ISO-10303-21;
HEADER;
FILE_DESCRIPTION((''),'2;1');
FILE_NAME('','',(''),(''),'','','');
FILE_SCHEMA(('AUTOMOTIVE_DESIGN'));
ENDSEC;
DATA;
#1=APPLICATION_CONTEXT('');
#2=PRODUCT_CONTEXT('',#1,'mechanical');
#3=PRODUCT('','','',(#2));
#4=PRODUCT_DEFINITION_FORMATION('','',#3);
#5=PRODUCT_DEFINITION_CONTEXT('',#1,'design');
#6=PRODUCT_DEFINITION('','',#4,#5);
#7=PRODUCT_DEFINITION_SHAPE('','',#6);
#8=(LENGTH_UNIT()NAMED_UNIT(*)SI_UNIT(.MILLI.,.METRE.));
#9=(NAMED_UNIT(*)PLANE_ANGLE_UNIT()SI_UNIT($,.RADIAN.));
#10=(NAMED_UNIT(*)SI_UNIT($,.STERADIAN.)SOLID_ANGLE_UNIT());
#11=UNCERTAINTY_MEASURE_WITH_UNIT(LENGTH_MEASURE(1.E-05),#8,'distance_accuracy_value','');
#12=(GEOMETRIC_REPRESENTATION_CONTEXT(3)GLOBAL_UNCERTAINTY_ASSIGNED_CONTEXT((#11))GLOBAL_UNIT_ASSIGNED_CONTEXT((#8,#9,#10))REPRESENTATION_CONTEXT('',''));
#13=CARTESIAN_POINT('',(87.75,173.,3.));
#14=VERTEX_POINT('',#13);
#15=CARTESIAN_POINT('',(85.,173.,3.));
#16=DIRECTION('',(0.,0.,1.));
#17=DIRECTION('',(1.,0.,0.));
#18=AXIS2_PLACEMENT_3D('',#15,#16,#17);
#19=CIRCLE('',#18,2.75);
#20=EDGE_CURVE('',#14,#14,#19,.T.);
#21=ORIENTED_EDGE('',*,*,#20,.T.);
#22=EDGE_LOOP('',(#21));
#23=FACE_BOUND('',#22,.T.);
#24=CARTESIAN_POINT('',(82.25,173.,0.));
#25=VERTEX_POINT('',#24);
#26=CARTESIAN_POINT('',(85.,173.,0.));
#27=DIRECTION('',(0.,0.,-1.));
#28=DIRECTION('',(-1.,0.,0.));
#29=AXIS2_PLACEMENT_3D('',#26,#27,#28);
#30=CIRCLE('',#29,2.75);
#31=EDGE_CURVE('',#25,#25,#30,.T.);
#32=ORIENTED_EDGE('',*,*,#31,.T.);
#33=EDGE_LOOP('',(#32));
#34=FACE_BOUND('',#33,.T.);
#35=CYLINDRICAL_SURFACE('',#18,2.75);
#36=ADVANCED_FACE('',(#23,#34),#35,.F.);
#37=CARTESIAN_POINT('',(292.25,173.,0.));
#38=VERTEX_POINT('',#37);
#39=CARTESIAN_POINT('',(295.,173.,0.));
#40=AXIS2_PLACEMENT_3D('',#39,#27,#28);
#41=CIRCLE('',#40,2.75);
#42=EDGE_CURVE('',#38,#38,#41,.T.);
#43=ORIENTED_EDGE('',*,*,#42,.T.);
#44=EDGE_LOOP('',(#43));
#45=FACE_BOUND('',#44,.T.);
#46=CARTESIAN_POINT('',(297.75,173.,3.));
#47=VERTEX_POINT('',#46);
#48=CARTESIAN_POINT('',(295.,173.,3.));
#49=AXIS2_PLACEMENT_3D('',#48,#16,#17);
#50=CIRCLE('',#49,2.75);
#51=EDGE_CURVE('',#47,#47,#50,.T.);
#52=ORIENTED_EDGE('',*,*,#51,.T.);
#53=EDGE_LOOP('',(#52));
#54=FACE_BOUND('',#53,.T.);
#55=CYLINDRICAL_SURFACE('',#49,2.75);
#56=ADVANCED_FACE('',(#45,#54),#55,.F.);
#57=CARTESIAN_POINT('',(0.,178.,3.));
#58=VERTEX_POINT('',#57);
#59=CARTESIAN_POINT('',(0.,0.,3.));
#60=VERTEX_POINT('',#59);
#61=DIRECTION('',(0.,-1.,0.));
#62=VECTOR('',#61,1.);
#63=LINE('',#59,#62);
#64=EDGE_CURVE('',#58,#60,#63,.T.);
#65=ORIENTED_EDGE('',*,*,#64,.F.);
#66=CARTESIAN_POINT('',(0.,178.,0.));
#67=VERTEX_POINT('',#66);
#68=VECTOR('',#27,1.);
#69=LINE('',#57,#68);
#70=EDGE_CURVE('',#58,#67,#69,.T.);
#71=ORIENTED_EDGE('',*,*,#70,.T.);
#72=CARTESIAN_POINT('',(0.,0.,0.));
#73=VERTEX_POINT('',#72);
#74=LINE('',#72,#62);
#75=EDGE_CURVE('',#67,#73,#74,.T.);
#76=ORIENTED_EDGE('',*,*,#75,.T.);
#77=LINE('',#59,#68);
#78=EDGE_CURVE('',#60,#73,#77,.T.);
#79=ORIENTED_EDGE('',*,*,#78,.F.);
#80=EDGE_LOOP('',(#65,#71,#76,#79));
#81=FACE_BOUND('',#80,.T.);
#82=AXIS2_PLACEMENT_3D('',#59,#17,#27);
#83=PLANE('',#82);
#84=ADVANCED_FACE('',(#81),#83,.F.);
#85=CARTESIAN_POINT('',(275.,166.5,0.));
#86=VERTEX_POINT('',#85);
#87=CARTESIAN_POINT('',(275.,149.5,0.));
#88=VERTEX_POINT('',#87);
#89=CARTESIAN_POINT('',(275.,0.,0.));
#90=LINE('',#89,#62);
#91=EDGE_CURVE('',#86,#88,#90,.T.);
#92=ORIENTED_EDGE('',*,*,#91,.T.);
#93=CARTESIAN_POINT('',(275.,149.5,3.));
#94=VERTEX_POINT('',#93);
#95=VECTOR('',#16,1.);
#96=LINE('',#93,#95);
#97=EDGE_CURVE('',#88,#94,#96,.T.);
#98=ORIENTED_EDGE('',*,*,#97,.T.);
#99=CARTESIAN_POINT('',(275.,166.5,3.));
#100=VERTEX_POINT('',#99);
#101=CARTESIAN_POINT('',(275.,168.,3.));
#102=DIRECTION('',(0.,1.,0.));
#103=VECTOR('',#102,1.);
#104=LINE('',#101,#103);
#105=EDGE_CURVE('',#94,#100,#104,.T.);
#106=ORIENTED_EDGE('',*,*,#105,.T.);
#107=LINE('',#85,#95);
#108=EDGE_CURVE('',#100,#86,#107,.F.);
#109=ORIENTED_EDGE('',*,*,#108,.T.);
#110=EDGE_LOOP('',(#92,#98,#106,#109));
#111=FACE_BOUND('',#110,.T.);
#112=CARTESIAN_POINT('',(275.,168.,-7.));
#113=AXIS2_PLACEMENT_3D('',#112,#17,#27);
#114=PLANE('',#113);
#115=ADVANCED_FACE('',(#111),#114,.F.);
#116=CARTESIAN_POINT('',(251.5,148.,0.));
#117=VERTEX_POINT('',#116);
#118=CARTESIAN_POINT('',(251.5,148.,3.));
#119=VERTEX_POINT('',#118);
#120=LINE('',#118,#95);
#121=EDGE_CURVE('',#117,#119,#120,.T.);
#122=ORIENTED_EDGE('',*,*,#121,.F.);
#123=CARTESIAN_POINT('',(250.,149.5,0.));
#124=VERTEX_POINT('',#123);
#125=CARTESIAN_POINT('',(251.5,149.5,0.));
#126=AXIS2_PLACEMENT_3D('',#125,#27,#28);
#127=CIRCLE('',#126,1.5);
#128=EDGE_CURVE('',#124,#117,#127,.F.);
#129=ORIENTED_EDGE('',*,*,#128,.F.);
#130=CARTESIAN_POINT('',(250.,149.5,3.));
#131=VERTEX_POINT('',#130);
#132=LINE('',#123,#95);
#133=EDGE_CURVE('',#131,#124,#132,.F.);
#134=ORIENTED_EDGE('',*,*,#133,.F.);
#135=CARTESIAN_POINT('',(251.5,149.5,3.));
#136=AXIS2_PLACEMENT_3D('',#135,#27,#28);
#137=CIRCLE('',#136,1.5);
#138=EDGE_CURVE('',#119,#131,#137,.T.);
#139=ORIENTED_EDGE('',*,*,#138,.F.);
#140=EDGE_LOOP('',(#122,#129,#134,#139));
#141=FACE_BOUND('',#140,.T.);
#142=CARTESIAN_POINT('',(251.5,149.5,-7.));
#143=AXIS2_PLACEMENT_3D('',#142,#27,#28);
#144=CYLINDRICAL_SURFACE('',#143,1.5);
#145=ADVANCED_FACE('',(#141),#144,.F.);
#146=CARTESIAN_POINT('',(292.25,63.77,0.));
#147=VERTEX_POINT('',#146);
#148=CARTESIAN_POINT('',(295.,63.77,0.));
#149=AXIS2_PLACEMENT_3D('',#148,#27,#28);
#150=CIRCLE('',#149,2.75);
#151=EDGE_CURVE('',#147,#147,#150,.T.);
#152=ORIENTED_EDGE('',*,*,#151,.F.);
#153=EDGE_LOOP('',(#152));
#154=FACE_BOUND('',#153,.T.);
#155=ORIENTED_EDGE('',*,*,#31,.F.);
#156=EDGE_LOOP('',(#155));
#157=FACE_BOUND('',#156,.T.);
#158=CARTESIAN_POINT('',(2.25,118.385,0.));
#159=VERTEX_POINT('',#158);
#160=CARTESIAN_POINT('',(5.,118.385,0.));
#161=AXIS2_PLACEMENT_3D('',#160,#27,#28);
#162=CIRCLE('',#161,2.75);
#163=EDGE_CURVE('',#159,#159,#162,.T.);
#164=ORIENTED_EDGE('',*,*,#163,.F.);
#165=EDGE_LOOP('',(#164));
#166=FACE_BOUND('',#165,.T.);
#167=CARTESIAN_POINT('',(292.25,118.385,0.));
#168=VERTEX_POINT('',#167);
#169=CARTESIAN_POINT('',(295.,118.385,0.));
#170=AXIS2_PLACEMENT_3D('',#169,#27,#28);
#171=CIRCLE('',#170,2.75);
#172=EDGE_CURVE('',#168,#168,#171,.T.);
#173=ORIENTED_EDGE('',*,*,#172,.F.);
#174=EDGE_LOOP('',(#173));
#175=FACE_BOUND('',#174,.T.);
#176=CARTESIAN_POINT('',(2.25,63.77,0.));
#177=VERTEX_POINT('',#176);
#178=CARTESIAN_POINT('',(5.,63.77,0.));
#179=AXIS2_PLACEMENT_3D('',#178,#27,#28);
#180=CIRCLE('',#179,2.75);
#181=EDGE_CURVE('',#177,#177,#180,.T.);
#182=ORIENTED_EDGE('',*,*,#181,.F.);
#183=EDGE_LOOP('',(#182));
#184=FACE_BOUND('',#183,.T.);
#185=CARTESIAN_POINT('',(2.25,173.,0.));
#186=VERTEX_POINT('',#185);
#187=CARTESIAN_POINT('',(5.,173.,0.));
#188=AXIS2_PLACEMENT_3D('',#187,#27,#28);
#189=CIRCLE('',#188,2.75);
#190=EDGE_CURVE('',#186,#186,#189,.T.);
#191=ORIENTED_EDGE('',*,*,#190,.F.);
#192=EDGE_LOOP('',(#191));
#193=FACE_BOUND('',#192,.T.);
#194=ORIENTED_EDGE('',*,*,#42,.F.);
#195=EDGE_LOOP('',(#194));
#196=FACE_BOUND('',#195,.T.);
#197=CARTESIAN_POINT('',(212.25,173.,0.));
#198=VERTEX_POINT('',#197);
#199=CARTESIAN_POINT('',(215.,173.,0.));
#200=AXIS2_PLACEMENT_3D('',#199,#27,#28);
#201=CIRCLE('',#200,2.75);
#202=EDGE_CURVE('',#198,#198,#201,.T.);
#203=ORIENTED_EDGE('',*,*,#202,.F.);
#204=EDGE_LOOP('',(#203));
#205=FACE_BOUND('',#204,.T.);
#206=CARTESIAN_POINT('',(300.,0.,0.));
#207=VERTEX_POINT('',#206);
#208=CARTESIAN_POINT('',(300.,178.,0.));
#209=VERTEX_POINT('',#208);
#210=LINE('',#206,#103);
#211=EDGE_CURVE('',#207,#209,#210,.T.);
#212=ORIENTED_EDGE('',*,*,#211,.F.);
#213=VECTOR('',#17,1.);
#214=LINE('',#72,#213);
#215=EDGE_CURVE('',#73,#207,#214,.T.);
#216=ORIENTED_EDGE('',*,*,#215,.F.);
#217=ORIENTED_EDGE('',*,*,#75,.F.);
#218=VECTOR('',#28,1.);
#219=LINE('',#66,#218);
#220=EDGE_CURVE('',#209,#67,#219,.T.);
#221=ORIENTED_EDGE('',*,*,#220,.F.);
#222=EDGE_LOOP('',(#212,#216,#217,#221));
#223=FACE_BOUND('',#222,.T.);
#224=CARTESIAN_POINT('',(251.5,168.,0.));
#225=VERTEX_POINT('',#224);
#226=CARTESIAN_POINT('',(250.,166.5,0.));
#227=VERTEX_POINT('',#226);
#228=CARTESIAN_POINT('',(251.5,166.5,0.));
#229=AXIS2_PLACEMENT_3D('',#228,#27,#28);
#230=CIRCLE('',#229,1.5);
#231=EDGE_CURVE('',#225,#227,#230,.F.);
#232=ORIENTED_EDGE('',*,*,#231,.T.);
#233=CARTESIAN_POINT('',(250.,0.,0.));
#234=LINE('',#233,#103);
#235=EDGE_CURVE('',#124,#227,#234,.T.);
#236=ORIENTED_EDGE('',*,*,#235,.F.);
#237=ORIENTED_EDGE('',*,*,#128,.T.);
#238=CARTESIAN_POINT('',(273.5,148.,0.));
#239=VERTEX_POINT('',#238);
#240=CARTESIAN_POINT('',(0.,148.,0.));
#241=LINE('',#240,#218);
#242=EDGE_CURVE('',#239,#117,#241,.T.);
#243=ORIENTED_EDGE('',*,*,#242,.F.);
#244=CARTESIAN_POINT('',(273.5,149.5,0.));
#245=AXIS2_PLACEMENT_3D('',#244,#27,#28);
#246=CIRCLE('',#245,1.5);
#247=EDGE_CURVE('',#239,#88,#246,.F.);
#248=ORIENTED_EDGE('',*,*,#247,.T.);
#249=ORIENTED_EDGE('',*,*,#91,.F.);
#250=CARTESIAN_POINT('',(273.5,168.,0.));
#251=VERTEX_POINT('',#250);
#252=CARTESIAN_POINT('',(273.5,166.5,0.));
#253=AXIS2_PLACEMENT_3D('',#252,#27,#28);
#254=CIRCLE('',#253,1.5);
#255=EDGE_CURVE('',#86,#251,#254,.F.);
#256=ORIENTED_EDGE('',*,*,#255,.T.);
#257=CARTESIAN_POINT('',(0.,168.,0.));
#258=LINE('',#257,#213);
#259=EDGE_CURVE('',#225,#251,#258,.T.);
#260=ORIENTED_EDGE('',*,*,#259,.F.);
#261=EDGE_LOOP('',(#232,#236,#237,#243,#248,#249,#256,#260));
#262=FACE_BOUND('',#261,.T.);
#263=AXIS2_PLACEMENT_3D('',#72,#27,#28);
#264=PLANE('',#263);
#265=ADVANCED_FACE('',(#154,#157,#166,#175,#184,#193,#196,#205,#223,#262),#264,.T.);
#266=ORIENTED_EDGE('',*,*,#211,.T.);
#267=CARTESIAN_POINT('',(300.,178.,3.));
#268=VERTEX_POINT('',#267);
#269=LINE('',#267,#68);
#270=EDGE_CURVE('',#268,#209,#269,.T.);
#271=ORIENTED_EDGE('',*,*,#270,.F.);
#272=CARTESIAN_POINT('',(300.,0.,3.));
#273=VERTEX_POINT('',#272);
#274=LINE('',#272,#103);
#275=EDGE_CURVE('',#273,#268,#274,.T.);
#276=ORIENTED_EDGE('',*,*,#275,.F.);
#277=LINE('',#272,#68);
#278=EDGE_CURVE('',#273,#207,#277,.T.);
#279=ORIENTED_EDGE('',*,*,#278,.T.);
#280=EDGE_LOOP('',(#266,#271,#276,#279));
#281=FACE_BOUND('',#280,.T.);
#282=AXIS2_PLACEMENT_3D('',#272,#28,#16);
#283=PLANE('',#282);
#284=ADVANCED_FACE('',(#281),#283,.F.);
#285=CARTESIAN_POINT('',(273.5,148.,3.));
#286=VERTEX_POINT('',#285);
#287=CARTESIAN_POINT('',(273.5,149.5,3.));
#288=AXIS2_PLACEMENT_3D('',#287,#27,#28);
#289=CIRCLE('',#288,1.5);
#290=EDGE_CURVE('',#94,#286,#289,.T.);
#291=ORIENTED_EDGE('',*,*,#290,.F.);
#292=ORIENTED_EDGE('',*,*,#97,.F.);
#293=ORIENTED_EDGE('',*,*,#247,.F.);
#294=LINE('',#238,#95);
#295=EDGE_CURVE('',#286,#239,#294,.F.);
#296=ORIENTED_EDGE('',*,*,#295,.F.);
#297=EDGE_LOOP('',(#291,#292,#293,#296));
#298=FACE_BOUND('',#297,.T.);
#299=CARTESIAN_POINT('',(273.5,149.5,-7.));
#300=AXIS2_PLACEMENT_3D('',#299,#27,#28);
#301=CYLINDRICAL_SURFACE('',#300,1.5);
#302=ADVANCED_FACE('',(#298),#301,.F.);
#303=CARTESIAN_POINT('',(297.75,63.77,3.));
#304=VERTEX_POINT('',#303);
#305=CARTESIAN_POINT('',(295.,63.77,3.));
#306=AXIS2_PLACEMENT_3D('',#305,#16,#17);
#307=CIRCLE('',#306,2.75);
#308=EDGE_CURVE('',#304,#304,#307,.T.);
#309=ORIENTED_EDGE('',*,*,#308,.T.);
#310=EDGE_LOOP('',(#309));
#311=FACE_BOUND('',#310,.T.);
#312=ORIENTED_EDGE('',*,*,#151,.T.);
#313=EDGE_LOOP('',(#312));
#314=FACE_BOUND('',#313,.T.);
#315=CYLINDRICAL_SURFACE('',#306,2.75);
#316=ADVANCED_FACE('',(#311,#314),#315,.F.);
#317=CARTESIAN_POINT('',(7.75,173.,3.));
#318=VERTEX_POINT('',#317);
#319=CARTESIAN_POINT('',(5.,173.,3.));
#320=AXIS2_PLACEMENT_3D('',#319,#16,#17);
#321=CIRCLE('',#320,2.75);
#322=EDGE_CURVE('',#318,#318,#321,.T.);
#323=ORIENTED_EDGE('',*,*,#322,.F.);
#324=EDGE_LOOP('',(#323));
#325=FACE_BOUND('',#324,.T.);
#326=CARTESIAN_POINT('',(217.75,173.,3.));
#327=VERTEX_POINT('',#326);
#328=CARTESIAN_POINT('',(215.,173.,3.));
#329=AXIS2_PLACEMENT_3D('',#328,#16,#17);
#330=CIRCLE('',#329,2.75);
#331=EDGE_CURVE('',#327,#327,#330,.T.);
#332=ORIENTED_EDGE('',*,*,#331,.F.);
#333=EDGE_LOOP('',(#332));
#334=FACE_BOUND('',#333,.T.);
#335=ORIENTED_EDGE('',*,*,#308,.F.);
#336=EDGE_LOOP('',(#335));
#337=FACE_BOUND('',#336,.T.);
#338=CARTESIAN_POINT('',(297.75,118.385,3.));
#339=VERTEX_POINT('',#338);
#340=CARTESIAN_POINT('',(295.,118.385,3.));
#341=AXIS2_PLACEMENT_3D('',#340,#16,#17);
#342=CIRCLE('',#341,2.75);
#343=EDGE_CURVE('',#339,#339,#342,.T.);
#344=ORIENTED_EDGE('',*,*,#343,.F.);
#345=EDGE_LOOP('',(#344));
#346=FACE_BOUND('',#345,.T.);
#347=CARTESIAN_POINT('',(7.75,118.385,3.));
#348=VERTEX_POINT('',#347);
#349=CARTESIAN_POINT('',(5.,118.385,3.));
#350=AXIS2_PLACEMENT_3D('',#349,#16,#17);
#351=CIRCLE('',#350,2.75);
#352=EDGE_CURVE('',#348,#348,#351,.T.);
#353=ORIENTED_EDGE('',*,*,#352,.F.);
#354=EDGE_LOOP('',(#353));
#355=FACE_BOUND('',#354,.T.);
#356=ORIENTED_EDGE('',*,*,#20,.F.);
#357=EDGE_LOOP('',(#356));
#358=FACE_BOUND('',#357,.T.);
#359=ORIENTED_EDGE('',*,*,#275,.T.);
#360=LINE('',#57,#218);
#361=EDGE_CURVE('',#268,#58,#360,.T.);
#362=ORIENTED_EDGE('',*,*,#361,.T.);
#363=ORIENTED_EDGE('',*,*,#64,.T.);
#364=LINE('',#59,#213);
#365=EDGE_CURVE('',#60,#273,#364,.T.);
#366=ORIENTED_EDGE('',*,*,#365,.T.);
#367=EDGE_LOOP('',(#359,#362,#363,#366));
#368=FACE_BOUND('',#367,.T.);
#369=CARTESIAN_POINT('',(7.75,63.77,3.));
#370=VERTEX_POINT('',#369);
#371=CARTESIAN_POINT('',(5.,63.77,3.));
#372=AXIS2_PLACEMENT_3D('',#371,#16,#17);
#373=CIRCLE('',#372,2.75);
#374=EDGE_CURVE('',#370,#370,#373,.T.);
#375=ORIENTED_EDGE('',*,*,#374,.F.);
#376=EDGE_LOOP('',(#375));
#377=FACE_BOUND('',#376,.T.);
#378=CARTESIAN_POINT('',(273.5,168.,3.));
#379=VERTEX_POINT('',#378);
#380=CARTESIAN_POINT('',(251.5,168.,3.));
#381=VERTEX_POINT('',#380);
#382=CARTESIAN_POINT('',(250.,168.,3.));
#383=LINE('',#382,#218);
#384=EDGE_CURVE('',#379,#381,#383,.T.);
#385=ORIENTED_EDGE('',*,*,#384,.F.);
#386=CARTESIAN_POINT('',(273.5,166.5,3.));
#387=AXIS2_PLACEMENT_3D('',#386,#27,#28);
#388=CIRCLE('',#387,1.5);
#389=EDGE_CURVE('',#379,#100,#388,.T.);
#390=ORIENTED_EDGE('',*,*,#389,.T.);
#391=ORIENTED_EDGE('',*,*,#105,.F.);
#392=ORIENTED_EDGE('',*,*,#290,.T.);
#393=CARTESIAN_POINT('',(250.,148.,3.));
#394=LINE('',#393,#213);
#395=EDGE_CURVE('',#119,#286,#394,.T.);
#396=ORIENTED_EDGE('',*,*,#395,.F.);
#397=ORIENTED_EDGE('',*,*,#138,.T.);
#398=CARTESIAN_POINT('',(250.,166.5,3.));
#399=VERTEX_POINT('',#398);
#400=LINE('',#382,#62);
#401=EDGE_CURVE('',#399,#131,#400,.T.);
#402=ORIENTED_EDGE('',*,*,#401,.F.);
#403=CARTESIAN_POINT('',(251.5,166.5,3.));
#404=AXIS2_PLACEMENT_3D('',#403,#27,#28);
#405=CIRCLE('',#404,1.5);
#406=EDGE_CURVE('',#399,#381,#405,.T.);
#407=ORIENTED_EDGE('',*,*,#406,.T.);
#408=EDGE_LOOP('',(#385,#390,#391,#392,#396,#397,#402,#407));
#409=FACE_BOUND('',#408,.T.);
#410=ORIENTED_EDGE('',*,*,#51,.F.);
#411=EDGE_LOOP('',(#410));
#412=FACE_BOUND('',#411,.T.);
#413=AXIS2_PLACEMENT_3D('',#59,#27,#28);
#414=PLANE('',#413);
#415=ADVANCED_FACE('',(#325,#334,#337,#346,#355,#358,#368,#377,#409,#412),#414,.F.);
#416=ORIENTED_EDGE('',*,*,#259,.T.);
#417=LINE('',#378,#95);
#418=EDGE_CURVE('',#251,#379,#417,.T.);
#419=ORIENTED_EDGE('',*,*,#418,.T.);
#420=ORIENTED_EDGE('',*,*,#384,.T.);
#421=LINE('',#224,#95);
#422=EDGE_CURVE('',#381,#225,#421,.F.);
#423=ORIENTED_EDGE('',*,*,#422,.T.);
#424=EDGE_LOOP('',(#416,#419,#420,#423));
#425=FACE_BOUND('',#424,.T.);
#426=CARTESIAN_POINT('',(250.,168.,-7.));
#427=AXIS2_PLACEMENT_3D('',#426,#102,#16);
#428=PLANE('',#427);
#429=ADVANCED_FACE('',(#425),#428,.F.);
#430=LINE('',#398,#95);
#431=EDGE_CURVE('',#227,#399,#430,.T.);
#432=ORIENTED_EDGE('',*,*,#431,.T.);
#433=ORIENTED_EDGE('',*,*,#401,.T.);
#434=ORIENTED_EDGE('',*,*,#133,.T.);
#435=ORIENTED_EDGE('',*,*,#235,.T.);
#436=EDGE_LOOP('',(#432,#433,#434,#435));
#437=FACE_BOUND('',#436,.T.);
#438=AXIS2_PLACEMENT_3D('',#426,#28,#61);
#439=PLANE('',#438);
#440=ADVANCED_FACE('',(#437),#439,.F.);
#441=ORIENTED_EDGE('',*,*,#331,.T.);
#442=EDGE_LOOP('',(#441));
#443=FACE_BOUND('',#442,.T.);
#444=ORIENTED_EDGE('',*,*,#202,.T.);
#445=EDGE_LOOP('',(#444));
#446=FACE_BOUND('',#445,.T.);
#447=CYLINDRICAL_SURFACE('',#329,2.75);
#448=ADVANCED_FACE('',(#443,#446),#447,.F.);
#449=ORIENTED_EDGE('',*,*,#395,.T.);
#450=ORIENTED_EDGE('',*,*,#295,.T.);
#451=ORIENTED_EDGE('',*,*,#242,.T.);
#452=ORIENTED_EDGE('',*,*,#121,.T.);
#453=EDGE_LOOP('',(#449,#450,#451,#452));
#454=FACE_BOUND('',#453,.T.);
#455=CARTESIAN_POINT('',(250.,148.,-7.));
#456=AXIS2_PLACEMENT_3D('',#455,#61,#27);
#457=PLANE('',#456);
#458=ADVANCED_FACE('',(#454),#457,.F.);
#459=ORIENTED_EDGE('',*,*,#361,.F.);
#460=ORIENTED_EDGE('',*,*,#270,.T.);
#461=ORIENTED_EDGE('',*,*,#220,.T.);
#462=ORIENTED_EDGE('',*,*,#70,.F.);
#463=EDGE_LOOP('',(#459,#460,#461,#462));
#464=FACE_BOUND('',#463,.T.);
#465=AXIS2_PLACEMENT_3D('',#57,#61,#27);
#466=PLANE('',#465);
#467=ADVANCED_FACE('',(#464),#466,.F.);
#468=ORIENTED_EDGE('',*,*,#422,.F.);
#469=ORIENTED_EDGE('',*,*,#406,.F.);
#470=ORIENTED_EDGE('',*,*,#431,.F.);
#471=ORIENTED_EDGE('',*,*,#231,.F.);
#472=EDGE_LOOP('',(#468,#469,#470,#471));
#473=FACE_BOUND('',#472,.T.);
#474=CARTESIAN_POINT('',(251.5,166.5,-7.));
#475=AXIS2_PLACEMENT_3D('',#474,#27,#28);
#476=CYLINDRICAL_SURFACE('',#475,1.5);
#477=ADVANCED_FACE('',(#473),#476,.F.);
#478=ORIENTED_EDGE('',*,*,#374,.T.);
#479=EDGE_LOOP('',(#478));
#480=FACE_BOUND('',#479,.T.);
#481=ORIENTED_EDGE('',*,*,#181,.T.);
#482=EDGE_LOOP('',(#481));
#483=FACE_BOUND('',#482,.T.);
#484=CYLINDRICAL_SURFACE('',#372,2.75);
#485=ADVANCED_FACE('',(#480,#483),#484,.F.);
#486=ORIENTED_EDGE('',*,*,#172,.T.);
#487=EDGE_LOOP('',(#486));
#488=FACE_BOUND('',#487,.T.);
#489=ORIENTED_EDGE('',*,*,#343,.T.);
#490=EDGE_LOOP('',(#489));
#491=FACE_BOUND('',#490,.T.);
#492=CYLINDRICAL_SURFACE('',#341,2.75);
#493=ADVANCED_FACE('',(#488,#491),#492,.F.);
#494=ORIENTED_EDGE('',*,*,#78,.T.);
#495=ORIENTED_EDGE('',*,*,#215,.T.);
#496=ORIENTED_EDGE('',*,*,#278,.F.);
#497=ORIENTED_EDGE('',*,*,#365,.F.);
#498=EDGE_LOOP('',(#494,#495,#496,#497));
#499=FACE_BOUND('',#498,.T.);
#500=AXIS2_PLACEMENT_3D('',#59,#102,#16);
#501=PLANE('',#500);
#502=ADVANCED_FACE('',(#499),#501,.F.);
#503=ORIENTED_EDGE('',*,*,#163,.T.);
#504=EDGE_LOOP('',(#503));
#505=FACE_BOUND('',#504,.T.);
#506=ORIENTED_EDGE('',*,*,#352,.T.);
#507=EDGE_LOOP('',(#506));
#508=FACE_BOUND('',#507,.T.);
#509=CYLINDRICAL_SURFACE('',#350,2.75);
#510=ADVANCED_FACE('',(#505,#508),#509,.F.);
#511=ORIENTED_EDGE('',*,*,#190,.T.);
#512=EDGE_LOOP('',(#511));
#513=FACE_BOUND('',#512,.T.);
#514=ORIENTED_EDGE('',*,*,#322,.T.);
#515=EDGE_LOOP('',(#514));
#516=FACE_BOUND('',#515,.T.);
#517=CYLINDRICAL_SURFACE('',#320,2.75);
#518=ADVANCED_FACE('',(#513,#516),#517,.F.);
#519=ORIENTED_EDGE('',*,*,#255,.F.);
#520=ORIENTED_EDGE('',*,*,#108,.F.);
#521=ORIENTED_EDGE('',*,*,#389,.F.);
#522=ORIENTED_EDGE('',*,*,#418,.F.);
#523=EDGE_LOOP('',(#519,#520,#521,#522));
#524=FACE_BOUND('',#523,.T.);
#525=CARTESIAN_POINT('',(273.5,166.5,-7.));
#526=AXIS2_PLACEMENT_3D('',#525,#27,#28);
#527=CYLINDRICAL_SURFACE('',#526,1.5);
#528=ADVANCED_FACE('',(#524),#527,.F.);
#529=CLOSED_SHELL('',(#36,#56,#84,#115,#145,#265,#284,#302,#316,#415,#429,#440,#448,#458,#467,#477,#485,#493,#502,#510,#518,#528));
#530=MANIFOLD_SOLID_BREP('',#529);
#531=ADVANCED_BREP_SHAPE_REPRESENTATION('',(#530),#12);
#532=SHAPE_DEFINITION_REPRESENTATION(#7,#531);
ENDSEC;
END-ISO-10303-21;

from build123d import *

# Parameters (mm, degrees)
SKETCH1_W                    = 300
SKETCH1_H                    = 178
BOSS_EXTRUDE1_DEPTH          = 3
M5_CLEARANCE_HOLE1_OUTLINE_R = 2.75
M5_CLEARANCE_HOLE1_DEPTH     = 3
SKETCH4_W                    = 25
SKETCH4_H                    = 20
CUT_EXTRUDE1_DEPTH           = 10
FILLET1_R                    = 1.5


# Read off the part's stored shape, not the designer's step: M5 Clearance Hole1
with BuildPart() as part:
    # Sketch1 → Boss-Extrude1 (new body)
    with BuildSketch(Plane.XY):
        with Locations((150, 89)):
            Rectangle(SKETCH1_W, SKETCH1_H)
    extrude(amount=BOSS_EXTRUDE1_DEPTH)

    # M5 Clearance Hole1 outline → M5 Clearance Hole1 (cut)
    with BuildSketch(Plane.XY):
        with Locations((295, 118.385)):
            Circle(M5_CLEARANCE_HOLE1_OUTLINE_R)
        with Locations((5, 118.385)):
            Circle(M5_CLEARANCE_HOLE1_OUTLINE_R)
        with Locations((295, 173)):
            Circle(M5_CLEARANCE_HOLE1_OUTLINE_R)
        with Locations((295, 63.77)):
            Circle(M5_CLEARANCE_HOLE1_OUTLINE_R)
        with Locations((5, 63.77)):
            Circle(M5_CLEARANCE_HOLE1_OUTLINE_R)
        with Locations((5, 173)):
            Circle(M5_CLEARANCE_HOLE1_OUTLINE_R)
        with Locations((85, 173)):
            Circle(M5_CLEARANCE_HOLE1_OUTLINE_R)
        with Locations((215, 173)):
            Circle(M5_CLEARANCE_HOLE1_OUTLINE_R)
    extrude(amount=M5_CLEARANCE_HOLE1_DEPTH, mode=Mode.SUBTRACT)

    # Sketch4 → Cut-Extrude1 (cut)
    with BuildSketch(Plane.XY.offset(3)):
        with Locations((262.5, 158)):
            Rectangle(SKETCH4_W, SKETCH4_H)
    extrude(amount=-CUT_EXTRUDE1_DEPTH, mode=Mode.SUBTRACT)

    # Fillet1
    fillet1_edges = [part.edges().sort_by_distance(p)[0] for p in [
        (250, 148, 1.5),
        (250, 168, 1.5),
        (275, 168, 1.5),
        (275, 148, 1.5),
    ]]
    fillet(fillet1_edges, radius=FILLET1_R)


solid = part.part
